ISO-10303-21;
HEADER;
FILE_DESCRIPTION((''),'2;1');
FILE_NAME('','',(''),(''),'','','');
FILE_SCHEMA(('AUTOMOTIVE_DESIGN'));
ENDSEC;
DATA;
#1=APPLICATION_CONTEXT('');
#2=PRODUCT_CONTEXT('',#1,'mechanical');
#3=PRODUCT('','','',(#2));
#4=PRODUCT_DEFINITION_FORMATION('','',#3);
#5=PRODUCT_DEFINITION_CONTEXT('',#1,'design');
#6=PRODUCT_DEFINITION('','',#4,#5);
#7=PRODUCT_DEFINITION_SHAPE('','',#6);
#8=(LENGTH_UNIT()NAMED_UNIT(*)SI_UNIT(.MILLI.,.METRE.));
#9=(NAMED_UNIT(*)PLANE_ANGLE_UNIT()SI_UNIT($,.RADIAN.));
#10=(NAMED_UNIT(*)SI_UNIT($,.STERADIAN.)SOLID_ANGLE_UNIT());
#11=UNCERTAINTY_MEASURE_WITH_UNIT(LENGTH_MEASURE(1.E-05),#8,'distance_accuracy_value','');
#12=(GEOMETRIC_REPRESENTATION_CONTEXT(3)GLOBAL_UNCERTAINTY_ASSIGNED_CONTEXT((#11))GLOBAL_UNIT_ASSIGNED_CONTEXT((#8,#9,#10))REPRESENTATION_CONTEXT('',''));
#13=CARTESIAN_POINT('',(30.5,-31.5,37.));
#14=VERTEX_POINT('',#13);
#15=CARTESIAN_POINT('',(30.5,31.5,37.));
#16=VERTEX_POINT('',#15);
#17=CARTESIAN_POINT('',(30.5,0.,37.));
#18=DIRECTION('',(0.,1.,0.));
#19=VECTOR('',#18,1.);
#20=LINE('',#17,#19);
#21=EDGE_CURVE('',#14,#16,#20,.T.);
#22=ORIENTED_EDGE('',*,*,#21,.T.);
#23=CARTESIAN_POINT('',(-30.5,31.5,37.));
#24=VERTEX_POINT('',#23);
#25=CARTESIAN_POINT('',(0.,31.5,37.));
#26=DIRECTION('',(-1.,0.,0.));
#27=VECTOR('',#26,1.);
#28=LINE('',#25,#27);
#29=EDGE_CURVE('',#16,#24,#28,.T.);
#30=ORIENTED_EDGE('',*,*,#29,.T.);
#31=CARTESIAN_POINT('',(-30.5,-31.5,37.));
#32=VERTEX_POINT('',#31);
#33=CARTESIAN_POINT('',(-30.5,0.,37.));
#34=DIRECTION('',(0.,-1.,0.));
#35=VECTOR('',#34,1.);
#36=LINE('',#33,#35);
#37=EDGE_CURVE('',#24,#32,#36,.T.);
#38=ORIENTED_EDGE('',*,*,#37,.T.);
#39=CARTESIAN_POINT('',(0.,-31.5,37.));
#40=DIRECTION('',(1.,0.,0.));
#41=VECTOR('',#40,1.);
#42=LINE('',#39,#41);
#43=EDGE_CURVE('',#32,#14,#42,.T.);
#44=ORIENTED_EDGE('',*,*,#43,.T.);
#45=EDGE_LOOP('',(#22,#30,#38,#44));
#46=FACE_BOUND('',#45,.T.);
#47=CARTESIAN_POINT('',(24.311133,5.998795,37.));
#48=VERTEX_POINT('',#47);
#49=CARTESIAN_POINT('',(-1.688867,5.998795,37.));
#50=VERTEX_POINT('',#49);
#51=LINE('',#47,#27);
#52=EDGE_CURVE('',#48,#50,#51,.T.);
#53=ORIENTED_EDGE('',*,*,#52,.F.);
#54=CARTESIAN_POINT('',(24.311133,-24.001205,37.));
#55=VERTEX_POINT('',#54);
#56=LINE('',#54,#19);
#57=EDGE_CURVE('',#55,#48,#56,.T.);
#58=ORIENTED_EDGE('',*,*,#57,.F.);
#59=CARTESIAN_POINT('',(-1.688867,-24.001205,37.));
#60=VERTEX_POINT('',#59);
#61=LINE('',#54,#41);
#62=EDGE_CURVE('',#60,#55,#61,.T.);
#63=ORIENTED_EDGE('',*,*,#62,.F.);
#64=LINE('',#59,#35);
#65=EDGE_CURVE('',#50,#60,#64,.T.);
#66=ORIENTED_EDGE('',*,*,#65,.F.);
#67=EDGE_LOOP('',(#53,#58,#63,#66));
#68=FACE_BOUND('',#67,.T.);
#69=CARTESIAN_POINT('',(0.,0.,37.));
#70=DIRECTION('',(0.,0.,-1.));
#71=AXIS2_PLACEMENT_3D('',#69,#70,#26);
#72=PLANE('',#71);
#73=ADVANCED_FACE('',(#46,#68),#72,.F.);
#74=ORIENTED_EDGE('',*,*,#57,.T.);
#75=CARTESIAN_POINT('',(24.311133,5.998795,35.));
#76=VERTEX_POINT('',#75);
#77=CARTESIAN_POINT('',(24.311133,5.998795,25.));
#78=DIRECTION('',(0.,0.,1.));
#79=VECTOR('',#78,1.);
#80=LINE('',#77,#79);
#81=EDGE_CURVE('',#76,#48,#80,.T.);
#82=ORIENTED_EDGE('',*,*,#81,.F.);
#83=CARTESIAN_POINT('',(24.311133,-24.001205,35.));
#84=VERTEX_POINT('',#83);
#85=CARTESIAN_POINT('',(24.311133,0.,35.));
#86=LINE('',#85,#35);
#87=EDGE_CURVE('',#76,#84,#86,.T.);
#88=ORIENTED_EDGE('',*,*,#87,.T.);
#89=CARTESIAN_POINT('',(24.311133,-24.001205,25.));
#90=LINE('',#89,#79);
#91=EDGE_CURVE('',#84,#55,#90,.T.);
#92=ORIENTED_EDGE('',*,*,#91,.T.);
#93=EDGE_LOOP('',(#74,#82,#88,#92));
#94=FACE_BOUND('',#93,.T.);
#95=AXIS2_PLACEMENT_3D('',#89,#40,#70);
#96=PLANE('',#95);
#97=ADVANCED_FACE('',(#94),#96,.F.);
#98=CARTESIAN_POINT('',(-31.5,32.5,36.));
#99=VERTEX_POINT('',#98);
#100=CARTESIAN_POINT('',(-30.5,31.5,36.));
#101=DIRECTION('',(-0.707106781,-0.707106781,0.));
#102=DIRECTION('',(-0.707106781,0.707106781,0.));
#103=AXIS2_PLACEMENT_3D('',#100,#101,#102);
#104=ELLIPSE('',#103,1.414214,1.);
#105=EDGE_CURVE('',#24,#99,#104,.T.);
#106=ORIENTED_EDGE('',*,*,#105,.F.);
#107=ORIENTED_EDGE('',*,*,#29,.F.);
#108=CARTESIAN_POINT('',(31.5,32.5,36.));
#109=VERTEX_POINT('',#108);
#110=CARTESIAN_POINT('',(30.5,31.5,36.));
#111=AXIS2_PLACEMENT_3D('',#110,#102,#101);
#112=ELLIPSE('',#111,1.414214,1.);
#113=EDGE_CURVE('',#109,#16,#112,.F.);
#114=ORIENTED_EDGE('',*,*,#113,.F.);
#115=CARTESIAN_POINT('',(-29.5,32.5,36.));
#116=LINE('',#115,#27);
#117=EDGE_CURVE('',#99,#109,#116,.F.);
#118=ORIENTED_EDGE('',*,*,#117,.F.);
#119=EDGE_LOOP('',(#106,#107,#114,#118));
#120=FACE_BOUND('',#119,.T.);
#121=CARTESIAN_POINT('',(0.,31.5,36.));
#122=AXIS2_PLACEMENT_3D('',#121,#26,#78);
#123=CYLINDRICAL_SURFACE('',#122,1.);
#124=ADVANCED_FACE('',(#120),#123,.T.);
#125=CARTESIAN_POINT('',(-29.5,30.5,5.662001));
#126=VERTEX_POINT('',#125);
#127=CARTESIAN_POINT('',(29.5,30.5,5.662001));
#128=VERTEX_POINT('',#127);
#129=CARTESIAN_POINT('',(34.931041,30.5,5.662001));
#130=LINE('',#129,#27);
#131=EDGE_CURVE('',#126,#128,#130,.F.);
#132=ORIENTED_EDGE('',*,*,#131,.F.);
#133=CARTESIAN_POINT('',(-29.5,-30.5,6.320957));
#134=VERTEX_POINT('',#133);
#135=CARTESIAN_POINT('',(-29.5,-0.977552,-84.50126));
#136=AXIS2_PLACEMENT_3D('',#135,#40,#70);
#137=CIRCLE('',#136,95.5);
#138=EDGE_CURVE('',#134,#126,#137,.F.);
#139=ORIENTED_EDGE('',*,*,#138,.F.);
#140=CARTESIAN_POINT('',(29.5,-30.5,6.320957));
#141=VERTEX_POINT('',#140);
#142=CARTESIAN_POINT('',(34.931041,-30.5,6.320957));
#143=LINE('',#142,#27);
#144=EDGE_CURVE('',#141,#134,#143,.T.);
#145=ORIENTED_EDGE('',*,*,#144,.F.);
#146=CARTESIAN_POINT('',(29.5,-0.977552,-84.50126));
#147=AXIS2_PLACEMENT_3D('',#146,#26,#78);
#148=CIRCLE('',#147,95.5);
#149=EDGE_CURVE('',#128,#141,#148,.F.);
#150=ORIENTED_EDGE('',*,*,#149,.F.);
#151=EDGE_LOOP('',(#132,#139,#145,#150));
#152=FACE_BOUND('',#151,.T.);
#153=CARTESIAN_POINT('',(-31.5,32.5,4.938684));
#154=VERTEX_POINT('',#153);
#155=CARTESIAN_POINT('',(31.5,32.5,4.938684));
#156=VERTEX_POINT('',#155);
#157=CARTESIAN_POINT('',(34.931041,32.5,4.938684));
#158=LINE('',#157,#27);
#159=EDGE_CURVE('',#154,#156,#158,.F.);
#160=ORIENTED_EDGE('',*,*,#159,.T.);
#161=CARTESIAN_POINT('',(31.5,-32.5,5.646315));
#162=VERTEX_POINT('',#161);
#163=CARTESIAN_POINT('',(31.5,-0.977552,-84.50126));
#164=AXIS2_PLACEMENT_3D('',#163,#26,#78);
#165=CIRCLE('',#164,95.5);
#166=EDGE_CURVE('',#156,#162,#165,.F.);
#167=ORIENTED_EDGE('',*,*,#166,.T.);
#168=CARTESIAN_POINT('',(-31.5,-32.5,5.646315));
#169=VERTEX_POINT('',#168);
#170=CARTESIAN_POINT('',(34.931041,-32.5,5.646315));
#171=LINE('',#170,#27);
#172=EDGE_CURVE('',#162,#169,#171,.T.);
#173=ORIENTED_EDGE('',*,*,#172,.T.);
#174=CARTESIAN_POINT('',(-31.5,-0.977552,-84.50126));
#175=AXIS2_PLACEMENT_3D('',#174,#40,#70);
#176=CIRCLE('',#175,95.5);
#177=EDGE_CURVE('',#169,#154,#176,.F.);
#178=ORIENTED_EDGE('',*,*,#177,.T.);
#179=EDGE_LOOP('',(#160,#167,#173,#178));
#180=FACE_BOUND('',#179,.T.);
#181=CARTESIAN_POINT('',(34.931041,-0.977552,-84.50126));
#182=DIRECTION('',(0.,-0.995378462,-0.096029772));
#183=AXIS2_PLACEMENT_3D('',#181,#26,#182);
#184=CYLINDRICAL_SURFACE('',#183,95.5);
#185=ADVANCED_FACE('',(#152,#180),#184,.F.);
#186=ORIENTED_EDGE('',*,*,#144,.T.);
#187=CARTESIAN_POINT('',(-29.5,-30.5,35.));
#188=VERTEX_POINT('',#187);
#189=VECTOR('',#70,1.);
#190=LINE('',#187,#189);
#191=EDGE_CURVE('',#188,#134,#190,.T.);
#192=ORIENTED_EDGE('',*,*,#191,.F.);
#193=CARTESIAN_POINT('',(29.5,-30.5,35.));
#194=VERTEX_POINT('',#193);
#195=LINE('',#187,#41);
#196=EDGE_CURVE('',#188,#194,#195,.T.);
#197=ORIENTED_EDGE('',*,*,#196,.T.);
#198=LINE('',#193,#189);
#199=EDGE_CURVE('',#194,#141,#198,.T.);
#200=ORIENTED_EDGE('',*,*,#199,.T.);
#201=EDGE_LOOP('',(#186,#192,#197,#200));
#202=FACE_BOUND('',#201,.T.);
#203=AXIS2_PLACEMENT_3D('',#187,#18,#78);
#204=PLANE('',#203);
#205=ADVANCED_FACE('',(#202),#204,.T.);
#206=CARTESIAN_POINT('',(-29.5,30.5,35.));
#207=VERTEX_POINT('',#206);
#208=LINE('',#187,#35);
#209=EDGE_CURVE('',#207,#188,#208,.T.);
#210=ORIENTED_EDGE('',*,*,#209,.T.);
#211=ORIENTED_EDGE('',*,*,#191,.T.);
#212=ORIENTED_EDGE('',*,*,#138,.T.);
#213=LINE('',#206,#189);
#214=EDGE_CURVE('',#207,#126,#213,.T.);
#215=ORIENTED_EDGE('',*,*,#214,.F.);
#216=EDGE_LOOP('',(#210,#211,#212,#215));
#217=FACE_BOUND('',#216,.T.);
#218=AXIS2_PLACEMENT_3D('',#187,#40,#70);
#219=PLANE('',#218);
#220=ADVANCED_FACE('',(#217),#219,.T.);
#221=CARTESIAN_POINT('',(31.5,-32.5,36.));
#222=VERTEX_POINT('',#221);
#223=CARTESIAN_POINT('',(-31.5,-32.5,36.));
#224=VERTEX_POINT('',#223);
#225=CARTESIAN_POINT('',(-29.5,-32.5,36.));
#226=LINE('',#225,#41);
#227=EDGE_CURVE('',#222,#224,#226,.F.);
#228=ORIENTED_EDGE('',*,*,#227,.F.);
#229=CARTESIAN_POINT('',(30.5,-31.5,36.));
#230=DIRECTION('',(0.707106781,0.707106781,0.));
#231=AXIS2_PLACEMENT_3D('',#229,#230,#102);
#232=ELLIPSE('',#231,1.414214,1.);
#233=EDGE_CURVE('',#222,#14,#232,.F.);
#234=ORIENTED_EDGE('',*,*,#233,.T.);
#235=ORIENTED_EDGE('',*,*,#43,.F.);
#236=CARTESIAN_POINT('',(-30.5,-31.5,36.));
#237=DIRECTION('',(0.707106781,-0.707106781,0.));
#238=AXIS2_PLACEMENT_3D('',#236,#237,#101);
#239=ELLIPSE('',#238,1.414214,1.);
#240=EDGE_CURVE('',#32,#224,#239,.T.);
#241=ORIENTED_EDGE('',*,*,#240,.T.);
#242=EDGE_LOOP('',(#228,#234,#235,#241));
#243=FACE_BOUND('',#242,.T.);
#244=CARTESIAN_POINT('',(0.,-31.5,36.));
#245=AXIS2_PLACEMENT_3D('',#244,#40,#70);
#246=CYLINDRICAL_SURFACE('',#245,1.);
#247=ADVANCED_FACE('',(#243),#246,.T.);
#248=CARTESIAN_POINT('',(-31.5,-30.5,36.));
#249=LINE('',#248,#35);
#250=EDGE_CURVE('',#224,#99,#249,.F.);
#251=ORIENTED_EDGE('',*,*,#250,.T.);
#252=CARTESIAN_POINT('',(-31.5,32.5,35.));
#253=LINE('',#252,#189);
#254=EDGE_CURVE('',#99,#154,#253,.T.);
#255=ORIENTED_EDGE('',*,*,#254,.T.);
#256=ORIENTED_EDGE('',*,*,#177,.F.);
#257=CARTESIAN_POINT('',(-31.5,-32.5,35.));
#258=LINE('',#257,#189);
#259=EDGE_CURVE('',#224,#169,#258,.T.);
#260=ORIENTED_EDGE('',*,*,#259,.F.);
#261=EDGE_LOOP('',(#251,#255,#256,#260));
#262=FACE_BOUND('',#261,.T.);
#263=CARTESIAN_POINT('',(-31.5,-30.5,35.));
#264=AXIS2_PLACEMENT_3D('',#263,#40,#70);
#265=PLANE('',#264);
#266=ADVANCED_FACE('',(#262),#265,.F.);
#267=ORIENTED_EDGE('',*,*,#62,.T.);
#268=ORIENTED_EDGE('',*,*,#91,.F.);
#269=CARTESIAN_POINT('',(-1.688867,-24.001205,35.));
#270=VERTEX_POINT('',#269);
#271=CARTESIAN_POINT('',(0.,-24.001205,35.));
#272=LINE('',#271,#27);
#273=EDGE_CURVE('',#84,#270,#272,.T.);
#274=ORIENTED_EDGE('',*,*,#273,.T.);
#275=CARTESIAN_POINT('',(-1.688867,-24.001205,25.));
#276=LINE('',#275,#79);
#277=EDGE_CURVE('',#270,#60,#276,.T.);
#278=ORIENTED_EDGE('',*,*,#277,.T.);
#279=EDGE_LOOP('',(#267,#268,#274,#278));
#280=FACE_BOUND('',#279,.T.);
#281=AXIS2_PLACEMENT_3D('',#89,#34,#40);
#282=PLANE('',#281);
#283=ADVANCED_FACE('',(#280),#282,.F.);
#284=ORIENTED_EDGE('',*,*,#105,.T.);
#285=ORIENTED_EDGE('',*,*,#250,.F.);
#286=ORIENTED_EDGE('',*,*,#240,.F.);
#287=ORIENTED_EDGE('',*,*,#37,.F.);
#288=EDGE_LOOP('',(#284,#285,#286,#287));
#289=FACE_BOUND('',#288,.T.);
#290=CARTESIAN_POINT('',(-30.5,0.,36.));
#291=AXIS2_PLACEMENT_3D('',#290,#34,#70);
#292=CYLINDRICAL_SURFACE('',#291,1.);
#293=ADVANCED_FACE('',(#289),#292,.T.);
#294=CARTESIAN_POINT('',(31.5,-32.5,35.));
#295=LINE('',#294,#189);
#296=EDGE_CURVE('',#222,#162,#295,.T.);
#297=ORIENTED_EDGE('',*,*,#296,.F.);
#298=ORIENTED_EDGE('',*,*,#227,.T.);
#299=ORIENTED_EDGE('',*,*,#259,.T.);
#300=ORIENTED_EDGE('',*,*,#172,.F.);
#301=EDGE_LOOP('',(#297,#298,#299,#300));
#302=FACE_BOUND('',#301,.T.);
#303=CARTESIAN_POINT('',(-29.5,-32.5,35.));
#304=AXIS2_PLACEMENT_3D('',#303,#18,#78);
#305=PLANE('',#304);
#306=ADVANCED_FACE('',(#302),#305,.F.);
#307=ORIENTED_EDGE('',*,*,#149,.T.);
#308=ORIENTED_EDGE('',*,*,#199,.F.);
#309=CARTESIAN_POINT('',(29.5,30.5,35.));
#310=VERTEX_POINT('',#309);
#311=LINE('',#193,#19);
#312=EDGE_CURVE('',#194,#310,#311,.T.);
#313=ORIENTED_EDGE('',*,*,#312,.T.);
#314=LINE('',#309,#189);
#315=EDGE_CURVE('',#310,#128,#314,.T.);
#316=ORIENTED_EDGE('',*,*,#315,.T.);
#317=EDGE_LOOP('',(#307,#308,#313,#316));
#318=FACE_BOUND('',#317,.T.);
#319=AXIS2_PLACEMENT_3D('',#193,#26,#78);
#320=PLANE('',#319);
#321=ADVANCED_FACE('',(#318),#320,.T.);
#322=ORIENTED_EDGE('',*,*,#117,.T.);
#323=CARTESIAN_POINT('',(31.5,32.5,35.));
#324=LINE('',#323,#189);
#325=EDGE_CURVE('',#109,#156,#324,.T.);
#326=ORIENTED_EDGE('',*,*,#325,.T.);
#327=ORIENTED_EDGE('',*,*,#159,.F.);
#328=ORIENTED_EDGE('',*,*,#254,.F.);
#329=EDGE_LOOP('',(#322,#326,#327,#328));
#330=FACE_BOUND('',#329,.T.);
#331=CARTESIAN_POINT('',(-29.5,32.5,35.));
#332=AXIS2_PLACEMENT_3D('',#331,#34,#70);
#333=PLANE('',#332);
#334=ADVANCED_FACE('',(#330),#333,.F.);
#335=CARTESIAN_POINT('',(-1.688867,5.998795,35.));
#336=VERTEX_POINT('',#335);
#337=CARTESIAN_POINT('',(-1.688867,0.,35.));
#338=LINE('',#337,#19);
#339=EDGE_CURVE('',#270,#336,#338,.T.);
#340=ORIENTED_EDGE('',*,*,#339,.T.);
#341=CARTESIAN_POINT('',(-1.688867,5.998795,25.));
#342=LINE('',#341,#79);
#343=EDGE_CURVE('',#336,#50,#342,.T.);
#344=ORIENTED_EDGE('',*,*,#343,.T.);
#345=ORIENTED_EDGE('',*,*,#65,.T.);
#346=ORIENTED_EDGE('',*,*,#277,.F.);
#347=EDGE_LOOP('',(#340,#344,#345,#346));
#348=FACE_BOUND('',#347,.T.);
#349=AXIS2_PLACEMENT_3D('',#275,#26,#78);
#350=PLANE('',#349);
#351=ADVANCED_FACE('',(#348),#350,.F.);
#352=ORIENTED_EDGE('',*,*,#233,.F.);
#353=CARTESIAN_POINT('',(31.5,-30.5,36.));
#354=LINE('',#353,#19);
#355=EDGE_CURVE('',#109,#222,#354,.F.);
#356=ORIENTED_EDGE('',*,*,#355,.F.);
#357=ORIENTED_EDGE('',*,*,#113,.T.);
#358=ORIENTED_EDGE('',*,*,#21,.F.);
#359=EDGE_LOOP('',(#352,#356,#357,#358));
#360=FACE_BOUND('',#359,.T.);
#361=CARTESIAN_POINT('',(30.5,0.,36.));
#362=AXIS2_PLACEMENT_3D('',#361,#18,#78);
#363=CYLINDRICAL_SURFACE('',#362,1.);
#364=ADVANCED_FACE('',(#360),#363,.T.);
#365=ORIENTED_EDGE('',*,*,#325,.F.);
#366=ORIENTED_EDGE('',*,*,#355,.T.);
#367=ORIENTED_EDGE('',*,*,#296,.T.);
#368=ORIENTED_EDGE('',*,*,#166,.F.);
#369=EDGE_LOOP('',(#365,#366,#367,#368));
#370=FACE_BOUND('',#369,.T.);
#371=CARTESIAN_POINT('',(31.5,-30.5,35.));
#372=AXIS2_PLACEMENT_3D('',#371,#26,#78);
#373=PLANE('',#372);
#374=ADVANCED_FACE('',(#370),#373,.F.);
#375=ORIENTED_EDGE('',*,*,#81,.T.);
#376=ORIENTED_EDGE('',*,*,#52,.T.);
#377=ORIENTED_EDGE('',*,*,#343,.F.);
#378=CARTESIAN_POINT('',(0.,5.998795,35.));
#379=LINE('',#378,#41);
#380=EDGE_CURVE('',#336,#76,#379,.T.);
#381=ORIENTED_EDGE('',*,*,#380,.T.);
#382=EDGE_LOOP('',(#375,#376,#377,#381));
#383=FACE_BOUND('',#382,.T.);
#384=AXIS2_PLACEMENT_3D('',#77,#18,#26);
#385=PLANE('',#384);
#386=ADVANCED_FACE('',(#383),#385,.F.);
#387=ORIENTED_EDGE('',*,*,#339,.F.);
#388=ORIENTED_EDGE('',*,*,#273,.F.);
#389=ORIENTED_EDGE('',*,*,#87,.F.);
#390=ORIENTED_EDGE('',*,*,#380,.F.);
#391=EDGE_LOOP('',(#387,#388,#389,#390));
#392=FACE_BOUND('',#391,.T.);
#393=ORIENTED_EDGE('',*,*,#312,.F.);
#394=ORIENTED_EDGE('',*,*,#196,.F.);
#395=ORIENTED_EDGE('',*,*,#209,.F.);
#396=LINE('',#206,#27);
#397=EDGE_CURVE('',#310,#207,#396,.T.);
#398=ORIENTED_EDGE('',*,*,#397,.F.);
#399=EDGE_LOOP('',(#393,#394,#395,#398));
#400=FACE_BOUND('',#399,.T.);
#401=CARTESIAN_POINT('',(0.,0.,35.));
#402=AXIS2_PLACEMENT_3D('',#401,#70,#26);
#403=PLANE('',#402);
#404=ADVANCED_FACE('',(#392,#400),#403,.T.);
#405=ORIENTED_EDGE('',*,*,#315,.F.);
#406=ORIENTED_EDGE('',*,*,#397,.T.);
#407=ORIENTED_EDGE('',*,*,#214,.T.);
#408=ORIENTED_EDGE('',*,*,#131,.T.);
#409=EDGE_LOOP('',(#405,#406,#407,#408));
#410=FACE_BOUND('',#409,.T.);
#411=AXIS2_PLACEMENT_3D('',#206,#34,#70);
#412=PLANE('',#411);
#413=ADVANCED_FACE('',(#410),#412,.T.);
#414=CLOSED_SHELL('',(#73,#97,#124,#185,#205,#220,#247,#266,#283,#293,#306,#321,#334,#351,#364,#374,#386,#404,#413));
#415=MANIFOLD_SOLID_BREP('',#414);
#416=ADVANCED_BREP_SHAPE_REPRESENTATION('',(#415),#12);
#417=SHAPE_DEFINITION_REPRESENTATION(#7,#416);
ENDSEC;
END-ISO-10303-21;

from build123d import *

# Parameters (mm, degrees)
ESQUISSE1_W             = 59
ESQUISSE1_H             = 61
BOSS_EXTRU_1_DEPTH      = 35
COQUE1_T                = 2
CONG_1_R                = 1
ESQUISSE2_W             = 28.002662862
ESQUISSE2_H             = 31.996726322
ENL_V_MAT_EXTRU_1_DEPTH = 10
EMPREINTE1_START        = -31.5
EMPREINTE1_DEPTH        = 63
ENL_V_START             = -70
ENL_V_MAT_EXTRU_2_DEPTH = 70
ESQUISSE6_W             = 30.866772499
ESQUISSE6_H             = 33.57762677
BOSS_EXTRU_2_DEPTH      = 2
ESQUISSE5_W             = 26
ESQUISSE5_H             = 30
ENL_V_MAT_EXTRU_3_DEPTH = 12


# Read off the part's stored shape, not the designer's step: Empreinte1
with BuildPart() as part:
    # Esquisse1 → Boss.-Extru.1 (new body)
    with BuildSketch(Plane.XY):
        Rectangle(ESQUISSE1_W, ESQUISSE1_H)
    extrude(amount=BOSS_EXTRU_1_DEPTH)

    # Coque1
    coque1_openings = [part.faces().sort_by_distance(p)[0] for p in [
        (0, 0, 0),
    ]]
    offset(amount=COQUE1_T, openings=coque1_openings, kind=Kind.INTERSECTION)

    # Congé1
    # the kernel refuses this fillet: 1 mm, written as the material it takes off along each edge
    with BuildSketch(Plane(origin=(-31.5, 35, 37), x_dir=(0, 0, -1), z_dir=(0, -1, 0)), Plane(origin=(31.5, -35, 37), x_dir=(0, 0, -1), z_dir=(0, 1, 0))) as cong_1_piece_1:
        with BuildLine():
            CenterArc((CONG_1_R, CONG_1_R), CONG_1_R, 180, 90)
            Line((0, CONG_1_R), (0, 0))
            Line((0, 0), (CONG_1_R, 0))
        make_face()
    extrude(amount=70, mode=Mode.SUBTRACT)
    with BuildSketch(Plane(origin=(-34, -32.5, 37), x_dir=(0, 0, -1), z_dir=(1, 0, 0)), Plane(origin=(34, 32.5, 37), x_dir=(0, 0, -1), z_dir=(-1, 0, 0))) as cong_1_piece_2:
        with BuildLine():
            CenterArc((CONG_1_R, CONG_1_R), CONG_1_R, 180, 90)
            Line((0, CONG_1_R), (0, 0))
            Line((0, 0), (CONG_1_R, 0))
        make_face()
    extrude(amount=68, mode=Mode.SUBTRACT)

    # Esquisse2 → Enlèv. mat.-Extru.1 (cut)
    with BuildSketch(Plane.XY.offset(37)):
        with Locations((12.997811926, -9.999029903)):
            Rectangle(ESQUISSE2_W, ESQUISSE2_H)
    extrude(amount=-ENL_V_MAT_EXTRU_1_DEPTH, mode=Mode.SUBTRACT)

    # Empreinte1 outline → Empreinte1 (cut)
    with BuildSketch(Plane.YZ.offset(EMPREINTE1_START)):
        with BuildLine():
            Line((-32.5, 5.64631504), (-32.5, 2.461866011))
            ThreePointArc((-32.5, 2.461866011), (0.066578718, 7.992846788), (32.5, 1.728105633))
            Line((32.5, 1.728105633), (32.5, 4.938683524))
            ThreePointArc((32.5, 4.938683524), (0.062060176, 10.993081225), (-32.5, 5.64631504))
        make_face()
    extrude(amount=EMPREINTE1_DEPTH, mode=Mode.SUBTRACT)

    # Esquisse3 → Enlèv. mat.-Extru.2 (cut)
    with BuildSketch(Plane(origin=(31.5, 0, 0), x_dir=(0, 0, -1), z_dir=(1, 0, 0)).offset(ENL_V_START)):
        with BuildLine():
            Line((-1.728105633, 32.5), (0, 32.5))
            Line((0, 32.5), (0, -32.5))
            Line((0, -32.5), (-2.461866011, -32.5))
            ThreePointArc((-2.461866011, -32.5), (-7.992846788, 0.066578718), (-1.728105633, 32.5))
        make_face()
    extrude(amount=ENL_V_MAT_EXTRU_2_DEPTH, mode=Mode.SUBTRACT)

    # Esquisse6 → Boss.-Extru.2 (add)
    with BuildSketch(Plane.XY.offset(37)):
        with Locations((12.6560139, -10.131028325)):
            Rectangle(ESQUISSE6_W, ESQUISSE6_H)
    extrude(amount=-BOSS_EXTRU_2_DEPTH)

    # Esquisse5 → Enlèv. mat.-Extru.3 (cut)
    with BuildSketch(Plane.XY.offset(37)):
        with Locations((11.311132579, -9.001205365)):
            Rectangle(ESQUISSE5_W, ESQUISSE5_H)
    extrude(amount=-ENL_V_MAT_EXTRU_3_DEPTH, mode=Mode.SUBTRACT)


solid = part.part
